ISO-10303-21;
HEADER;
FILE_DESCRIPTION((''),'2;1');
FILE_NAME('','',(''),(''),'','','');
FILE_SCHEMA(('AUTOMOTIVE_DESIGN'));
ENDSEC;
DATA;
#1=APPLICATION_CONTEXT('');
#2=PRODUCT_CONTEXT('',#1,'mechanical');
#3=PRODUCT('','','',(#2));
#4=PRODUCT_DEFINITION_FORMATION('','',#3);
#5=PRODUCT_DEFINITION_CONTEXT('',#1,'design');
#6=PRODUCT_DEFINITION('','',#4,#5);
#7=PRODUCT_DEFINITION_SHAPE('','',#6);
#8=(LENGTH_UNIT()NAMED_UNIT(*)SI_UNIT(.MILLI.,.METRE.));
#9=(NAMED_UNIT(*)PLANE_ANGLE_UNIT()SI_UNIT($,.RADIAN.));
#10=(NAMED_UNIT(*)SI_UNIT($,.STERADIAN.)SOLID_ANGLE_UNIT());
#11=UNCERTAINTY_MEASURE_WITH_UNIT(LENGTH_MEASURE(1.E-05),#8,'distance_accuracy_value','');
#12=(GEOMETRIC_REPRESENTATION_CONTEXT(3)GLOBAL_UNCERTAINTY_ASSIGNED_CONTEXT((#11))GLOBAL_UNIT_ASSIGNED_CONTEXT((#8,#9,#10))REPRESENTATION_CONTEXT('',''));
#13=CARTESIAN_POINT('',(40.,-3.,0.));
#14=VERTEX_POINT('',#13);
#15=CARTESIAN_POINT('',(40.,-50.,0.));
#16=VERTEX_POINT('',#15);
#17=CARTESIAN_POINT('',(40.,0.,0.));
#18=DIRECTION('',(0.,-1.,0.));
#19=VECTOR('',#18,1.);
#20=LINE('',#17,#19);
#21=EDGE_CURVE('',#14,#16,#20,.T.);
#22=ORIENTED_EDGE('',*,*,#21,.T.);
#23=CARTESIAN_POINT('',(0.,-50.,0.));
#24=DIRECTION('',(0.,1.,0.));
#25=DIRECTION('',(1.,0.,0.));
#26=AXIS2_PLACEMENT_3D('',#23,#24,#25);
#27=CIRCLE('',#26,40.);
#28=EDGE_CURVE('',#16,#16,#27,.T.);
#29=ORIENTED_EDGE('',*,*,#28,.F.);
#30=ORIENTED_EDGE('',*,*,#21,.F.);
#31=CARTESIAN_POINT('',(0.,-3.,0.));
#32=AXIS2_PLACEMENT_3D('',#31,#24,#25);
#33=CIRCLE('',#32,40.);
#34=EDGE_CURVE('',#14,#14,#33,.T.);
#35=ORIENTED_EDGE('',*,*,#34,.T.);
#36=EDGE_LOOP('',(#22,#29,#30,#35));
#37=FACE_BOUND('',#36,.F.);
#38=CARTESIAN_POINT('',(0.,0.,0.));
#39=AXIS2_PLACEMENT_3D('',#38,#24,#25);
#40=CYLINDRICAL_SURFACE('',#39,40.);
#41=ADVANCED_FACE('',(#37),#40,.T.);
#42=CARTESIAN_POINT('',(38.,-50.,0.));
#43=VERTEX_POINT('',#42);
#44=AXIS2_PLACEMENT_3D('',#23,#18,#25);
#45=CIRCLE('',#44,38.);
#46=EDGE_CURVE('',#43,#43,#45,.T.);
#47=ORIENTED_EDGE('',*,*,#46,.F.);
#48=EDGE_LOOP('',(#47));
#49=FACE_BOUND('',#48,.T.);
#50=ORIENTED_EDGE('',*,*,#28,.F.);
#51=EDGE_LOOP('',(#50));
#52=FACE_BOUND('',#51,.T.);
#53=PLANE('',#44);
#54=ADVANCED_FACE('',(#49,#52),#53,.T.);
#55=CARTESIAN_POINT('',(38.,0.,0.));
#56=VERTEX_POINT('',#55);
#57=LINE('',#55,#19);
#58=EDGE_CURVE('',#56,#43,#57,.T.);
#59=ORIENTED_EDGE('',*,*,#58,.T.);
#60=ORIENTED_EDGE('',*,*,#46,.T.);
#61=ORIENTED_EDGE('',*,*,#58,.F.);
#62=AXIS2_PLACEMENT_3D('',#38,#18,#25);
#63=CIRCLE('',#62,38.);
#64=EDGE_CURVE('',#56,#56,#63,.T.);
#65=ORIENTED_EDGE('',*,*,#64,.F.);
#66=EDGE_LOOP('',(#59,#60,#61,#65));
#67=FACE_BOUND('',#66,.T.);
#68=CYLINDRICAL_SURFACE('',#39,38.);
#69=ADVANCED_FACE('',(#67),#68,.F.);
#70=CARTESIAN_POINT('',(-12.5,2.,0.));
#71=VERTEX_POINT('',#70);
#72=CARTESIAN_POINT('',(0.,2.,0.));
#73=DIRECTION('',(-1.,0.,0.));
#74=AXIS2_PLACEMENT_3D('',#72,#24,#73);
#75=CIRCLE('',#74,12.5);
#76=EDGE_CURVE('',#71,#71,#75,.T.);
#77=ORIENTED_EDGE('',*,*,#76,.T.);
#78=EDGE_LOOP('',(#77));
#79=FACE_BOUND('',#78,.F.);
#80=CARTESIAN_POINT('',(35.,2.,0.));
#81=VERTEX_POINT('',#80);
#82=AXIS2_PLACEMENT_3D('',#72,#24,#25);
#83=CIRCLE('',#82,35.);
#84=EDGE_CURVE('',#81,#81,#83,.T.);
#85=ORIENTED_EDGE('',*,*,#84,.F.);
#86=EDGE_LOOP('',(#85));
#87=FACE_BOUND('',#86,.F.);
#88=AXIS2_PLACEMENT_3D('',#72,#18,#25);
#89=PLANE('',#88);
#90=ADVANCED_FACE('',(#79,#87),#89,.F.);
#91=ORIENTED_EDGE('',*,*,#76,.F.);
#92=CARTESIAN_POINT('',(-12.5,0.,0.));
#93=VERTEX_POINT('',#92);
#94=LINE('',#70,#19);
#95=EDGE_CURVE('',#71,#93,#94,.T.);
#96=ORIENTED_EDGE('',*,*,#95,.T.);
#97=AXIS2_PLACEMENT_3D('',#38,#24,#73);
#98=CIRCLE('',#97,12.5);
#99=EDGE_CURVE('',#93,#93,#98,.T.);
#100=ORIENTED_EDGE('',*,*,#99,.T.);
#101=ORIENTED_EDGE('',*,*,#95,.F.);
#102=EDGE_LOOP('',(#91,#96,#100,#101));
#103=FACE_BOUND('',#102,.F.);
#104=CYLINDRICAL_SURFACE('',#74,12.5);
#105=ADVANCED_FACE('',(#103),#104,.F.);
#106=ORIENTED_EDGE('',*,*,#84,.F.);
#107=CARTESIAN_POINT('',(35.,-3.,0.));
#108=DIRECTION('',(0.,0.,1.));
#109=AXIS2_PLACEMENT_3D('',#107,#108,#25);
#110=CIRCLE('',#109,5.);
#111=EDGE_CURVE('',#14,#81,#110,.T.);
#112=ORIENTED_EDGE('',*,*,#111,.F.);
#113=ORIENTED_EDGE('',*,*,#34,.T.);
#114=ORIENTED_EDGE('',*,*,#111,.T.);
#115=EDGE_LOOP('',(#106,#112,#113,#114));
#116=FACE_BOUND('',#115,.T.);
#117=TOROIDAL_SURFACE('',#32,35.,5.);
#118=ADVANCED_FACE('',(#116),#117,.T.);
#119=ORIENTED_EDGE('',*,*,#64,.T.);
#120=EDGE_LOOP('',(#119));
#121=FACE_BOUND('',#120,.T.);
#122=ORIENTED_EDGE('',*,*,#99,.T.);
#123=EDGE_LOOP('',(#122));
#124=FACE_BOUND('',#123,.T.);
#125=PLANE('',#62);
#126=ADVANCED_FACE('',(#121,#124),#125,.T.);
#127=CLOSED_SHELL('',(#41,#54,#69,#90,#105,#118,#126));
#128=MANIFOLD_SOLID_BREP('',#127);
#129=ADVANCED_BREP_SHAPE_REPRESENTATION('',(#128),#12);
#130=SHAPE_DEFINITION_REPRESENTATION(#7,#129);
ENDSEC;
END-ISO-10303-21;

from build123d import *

# Parameters (mm, degrees)
F0_R     = 38
F1_DEPTH = 50
F2_T     = 2
F3_R     = 12.5
F4_DEPTH = 52.001
F5_R     = 5


with BuildPart() as f1:
    # F0 (on Front) → F1 (new body)
    with BuildSketch(Plane.XZ):
        Circle(F0_R)
    extrude(amount=F1_DEPTH)

    # F2
    f2_openings = [f1.faces().sort_by_distance(p)[0] for p in [
        (0, -50, 0),
    ]]
    offset(amount=F2_T, openings=f2_openings, kind=Kind.INTERSECTION)

    # F3 (on face) → F4 (cut, through all)
    with BuildSketch(Plane(origin=(0, 2, 0), x_dir=(-1, 0, 0), z_dir=(0, 1, 0))):
        Circle(F3_R)
    extrude(amount=-F4_DEPTH, mode=Mode.SUBTRACT)

    # F5
    f5_edges = [f1.edges().sort_by_distance(p)[0] for p in [
        (-40, 2, 0),
    ]]
    fillet(f5_edges, radius=F5_R)


solid = f1.part
